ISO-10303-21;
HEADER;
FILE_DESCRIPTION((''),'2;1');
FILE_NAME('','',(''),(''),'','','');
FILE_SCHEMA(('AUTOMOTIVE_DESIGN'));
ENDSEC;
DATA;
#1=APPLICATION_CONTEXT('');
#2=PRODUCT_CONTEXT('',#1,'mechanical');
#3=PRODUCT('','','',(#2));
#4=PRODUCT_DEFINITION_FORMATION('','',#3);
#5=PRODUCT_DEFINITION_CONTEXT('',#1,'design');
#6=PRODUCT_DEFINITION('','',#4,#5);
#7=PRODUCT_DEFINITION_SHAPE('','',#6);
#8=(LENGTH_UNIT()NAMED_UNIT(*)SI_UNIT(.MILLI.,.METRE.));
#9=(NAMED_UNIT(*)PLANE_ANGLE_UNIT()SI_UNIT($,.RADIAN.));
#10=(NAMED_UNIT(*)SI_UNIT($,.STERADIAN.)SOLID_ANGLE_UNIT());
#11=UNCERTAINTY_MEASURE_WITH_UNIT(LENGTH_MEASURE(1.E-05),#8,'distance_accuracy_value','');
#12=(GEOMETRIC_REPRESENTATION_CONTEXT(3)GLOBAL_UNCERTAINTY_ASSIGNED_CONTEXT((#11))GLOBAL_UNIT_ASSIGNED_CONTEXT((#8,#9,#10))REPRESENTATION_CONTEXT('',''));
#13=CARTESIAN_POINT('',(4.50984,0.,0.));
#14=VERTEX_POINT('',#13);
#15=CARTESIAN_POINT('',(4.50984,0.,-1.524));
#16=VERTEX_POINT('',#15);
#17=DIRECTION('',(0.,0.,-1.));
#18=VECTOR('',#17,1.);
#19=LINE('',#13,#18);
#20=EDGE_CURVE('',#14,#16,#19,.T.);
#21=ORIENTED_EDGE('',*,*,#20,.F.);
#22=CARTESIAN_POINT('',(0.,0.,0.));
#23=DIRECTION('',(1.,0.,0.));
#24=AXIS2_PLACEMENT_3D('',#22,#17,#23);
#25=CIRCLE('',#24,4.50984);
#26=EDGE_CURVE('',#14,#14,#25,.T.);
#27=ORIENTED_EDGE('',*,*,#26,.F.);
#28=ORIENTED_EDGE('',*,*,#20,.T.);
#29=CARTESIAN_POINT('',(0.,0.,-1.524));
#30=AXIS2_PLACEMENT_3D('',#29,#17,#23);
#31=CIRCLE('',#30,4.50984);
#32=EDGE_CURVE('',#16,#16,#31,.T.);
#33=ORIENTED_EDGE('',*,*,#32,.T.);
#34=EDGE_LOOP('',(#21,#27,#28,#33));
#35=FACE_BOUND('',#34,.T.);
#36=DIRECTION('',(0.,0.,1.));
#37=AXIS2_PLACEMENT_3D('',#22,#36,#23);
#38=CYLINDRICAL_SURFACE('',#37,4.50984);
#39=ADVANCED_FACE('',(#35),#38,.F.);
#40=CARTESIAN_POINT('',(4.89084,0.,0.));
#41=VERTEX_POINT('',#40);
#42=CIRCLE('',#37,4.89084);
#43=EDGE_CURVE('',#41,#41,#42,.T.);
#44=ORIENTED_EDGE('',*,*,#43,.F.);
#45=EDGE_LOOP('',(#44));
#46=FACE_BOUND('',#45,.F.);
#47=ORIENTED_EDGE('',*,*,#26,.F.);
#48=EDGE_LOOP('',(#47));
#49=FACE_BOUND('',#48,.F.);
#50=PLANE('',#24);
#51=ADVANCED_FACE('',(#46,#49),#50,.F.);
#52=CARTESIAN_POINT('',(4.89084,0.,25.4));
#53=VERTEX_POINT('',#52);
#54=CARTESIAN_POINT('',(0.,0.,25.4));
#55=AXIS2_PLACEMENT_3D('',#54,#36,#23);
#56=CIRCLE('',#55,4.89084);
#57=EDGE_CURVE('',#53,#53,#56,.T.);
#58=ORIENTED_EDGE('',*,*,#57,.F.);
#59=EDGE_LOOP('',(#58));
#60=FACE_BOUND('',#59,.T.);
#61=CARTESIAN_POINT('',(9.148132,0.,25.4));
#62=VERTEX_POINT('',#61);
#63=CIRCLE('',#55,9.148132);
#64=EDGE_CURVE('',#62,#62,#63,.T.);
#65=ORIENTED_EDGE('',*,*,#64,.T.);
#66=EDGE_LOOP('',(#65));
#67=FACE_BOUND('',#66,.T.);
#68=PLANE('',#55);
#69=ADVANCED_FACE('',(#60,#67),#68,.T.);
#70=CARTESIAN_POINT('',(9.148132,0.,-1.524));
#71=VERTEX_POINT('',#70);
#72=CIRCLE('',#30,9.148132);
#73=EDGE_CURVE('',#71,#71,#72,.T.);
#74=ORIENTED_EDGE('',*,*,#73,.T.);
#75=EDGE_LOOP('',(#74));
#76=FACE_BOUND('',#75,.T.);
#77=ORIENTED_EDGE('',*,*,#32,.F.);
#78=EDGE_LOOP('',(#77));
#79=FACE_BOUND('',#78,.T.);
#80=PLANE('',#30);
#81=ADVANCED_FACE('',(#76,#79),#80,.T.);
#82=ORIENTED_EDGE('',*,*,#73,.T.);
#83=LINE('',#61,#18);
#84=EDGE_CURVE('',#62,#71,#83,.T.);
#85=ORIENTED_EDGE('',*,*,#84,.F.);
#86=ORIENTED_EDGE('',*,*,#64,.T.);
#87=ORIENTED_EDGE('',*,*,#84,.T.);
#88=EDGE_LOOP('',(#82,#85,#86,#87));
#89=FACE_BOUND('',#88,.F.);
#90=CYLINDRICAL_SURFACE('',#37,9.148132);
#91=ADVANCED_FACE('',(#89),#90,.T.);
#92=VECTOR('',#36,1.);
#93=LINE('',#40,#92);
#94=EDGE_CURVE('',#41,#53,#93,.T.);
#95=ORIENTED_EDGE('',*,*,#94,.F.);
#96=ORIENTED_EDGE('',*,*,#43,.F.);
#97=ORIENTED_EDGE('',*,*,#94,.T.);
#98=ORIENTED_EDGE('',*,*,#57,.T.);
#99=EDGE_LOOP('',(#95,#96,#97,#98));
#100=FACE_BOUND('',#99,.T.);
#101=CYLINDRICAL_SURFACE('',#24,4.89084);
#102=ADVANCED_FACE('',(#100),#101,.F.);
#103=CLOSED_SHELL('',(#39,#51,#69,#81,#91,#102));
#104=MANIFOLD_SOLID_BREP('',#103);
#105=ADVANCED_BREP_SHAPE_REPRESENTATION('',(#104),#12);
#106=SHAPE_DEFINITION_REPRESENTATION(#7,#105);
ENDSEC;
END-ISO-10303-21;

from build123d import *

# Parameters (mm, degrees)
F0_R     = 9.1481324812
F0_R_2   = 4.8908401844
F2_DEPTH = 25.4
F3_R     = 9.1481324812
F3_R_2   = 4.5098401844
F4_DEPTH = 1.524


# Not quite as in the source:
# - the program builds the solid bodies; features that only make, move or delete a surface that nothing else refers to are left out


with BuildPart() as f2:
    # F0 (on Top) → F2 (new body)
    with BuildSketch(Plane.XY):
        Circle(F0_R)
        Circle(F0_R_2, mode=Mode.SUBTRACT)
    extrude(amount=F2_DEPTH)

    # F3 (on face) → F4 (join)
    with BuildSketch(Plane(origin=(0, 0, 0), x_dir=(1, 0, 0), z_dir=(0, 0, -1))):
        Circle(F3_R)
        Circle(F3_R_2, mode=Mode.SUBTRACT)
    extrude(amount=F4_DEPTH)


solid = f2.part
